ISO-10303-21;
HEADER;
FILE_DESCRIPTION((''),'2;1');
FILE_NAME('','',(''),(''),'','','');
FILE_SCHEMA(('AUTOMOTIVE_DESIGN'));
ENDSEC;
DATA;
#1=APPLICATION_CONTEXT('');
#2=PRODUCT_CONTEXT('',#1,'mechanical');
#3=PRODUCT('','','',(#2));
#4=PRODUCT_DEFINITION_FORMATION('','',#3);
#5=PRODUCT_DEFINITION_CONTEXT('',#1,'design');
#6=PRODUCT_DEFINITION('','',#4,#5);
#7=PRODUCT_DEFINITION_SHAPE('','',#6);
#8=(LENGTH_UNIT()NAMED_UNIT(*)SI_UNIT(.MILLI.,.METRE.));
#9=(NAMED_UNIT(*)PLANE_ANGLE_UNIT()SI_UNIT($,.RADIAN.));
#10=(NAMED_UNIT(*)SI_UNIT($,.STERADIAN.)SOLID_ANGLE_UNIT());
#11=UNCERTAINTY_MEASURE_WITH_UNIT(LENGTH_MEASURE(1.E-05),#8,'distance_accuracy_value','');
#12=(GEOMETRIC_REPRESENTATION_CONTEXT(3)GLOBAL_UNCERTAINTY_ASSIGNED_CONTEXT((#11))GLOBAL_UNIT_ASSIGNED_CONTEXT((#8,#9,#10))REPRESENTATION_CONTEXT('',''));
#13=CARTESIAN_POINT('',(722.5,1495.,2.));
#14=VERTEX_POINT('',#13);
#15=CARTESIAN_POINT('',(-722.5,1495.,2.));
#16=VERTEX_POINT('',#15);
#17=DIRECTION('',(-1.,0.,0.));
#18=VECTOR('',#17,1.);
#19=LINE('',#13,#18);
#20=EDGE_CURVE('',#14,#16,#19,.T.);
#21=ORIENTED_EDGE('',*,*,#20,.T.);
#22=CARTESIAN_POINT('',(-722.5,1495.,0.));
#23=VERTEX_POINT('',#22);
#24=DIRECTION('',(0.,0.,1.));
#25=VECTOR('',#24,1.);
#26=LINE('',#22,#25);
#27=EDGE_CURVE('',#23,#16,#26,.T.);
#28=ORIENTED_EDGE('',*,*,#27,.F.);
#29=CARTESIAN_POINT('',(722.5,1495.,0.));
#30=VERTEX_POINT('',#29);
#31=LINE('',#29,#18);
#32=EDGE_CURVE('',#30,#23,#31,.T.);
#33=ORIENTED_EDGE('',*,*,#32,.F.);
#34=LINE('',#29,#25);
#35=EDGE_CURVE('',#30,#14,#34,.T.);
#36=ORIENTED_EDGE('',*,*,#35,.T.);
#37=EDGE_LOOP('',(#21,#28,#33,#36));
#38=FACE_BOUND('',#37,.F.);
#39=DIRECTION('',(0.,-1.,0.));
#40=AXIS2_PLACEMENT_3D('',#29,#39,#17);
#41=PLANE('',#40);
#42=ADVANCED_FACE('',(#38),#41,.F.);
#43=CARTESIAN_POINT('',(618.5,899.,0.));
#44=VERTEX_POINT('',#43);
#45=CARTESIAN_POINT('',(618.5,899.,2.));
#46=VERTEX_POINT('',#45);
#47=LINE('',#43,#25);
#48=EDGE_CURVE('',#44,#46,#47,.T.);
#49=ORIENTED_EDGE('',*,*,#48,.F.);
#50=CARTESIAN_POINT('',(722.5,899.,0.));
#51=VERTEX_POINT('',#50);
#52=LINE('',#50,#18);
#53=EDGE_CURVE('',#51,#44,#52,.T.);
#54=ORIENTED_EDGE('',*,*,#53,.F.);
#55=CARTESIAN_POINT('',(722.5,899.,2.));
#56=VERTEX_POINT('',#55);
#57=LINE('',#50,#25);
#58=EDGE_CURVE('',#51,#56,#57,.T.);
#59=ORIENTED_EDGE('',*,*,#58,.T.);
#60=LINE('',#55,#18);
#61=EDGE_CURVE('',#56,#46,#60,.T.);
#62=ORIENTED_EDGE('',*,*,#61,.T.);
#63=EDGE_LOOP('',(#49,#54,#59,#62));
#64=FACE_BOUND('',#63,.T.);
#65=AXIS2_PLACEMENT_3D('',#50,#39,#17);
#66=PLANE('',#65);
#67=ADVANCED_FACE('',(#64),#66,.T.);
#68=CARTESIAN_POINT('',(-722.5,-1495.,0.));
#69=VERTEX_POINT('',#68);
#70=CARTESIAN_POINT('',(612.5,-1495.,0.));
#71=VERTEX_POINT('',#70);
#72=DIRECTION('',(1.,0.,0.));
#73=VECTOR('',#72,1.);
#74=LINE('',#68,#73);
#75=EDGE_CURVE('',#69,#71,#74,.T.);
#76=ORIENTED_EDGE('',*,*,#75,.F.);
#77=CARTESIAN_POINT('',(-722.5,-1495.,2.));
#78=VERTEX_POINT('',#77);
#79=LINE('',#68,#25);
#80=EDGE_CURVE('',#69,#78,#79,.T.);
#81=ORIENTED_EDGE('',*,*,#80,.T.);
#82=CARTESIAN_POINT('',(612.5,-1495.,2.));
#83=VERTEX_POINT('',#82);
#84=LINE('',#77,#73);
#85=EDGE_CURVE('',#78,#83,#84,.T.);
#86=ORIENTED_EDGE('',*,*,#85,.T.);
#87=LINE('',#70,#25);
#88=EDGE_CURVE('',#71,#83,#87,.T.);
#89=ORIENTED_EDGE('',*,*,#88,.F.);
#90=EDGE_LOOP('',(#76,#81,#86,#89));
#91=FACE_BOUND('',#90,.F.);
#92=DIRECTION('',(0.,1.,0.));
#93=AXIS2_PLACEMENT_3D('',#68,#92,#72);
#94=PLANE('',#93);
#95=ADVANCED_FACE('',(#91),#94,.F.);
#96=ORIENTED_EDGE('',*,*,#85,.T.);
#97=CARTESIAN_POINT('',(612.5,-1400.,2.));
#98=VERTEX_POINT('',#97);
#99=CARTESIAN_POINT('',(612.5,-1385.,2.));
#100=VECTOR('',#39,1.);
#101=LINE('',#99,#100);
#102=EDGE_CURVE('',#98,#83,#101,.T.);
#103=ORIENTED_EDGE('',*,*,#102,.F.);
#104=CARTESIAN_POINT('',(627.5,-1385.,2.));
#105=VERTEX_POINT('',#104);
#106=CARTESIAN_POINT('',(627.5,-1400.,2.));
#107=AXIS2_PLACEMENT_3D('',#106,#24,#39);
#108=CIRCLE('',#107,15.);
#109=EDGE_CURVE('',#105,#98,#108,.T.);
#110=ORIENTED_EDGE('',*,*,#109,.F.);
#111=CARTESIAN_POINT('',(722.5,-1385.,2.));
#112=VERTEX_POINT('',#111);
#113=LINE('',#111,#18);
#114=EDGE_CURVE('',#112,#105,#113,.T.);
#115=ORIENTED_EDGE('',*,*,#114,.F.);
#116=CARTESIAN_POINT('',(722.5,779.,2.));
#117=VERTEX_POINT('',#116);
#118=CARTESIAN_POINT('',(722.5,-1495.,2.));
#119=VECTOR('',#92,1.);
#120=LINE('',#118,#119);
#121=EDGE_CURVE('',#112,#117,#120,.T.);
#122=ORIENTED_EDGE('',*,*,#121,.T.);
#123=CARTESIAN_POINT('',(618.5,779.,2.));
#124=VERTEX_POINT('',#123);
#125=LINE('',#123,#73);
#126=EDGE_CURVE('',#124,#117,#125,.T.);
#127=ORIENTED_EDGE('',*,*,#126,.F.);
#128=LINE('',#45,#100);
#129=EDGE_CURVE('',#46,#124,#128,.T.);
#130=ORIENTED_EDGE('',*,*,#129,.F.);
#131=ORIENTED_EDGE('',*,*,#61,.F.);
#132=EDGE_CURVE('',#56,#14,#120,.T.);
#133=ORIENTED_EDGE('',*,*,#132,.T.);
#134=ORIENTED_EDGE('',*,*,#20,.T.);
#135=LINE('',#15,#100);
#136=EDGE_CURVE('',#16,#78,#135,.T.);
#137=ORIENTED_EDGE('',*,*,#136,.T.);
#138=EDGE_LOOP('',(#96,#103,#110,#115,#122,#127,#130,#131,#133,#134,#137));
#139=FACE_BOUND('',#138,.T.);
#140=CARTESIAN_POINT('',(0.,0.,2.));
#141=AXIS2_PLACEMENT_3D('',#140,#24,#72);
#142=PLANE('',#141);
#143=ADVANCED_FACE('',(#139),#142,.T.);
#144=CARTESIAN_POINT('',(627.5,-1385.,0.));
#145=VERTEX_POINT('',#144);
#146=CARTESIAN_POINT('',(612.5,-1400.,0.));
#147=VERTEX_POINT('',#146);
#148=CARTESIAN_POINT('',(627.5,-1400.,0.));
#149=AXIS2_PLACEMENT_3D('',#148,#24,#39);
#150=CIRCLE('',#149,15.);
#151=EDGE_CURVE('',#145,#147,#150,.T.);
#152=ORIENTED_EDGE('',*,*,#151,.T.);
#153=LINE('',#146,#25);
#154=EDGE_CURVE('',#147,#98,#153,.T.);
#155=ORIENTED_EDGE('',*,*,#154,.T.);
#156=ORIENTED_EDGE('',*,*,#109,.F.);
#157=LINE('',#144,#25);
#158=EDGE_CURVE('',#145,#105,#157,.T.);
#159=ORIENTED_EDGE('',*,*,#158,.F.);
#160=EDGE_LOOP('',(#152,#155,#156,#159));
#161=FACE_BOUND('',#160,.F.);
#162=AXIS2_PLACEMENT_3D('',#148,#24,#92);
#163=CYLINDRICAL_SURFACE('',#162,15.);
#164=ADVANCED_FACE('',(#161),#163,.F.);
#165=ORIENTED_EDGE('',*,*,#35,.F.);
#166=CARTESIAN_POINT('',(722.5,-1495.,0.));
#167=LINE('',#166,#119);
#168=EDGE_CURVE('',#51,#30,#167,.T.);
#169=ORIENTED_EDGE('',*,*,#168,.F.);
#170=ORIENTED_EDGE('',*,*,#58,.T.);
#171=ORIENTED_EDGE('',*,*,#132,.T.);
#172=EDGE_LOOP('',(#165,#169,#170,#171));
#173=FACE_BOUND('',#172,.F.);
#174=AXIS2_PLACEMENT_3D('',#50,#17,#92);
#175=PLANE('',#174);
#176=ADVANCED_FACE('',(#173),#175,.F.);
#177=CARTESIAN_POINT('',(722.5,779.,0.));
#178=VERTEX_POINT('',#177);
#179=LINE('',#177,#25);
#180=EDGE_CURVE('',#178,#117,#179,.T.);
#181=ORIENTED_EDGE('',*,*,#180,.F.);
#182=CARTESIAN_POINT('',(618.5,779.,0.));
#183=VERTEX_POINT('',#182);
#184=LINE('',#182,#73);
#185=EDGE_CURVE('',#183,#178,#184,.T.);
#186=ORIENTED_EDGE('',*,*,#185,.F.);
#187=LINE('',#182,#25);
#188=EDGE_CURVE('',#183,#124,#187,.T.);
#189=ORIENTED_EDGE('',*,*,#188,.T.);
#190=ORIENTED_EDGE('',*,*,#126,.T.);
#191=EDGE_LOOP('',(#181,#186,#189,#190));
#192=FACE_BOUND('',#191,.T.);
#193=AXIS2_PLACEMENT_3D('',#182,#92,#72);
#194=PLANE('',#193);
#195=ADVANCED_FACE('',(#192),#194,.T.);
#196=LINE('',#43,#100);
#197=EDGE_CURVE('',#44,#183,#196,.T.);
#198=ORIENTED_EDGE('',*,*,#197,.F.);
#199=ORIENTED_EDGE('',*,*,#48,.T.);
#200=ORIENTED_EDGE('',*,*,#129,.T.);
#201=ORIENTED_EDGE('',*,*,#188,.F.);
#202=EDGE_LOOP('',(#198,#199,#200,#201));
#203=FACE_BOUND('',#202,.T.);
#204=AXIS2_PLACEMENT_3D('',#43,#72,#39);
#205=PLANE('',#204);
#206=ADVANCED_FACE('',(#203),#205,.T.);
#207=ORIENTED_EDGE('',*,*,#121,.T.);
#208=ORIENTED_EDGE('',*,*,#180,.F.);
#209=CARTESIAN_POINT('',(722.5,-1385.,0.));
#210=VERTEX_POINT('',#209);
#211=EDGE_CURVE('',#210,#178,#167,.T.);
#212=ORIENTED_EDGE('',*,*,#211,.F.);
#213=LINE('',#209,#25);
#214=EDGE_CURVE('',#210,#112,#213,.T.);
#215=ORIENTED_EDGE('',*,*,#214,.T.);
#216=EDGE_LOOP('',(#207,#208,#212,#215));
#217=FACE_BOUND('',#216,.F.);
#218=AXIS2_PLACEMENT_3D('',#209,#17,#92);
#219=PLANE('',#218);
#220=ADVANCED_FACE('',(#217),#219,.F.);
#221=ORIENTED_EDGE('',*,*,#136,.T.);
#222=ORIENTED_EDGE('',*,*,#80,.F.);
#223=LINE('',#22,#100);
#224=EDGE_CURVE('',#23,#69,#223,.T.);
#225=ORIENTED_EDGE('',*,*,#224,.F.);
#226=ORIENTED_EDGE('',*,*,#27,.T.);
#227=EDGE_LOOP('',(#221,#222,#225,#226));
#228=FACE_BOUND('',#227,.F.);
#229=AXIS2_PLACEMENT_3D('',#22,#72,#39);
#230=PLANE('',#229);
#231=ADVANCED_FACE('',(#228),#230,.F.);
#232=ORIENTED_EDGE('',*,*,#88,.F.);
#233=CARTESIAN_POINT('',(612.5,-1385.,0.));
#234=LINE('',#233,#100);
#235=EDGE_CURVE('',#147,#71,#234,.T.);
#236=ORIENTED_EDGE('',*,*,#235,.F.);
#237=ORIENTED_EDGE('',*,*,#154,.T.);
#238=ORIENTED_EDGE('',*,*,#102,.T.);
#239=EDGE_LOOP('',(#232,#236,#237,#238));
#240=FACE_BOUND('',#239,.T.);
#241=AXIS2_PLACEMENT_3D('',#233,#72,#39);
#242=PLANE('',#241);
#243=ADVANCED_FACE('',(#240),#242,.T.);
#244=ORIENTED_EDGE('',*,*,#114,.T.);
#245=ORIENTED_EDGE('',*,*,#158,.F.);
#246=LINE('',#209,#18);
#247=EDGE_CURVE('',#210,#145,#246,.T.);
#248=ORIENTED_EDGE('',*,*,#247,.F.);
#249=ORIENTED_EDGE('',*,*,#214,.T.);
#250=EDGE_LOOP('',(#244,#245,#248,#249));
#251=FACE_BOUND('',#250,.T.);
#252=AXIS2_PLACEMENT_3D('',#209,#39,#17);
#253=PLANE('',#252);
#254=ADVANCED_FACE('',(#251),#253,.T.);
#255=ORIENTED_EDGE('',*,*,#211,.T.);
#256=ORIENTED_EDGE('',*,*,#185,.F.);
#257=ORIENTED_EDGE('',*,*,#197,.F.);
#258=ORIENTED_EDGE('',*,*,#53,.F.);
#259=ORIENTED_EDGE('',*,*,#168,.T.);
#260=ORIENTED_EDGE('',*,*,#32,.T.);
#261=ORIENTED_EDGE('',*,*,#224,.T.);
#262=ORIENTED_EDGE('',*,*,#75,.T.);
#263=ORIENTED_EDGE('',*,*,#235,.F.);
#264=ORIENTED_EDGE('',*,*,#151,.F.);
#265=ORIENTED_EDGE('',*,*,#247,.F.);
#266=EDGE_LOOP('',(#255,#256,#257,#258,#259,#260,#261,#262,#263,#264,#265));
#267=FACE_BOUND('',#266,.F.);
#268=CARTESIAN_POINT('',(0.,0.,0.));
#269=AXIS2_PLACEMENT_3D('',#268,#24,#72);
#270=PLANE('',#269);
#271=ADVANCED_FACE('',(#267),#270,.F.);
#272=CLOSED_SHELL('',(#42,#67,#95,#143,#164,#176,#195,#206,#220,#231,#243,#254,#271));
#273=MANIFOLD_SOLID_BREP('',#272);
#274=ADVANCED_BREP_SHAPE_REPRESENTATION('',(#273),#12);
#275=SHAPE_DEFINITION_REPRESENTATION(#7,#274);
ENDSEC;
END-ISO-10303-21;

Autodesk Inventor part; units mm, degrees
ref_plane "YZ Plane" through (0, 0, 0) normal (1, 0, 0) x (0, 1, 0)
ref_plane "XZ Plane" through (0, 0, 0) normal (0, 1, 0) x (-1, 0, 0)
ref_plane "XY Plane" through (0, 0, 0) normal (0, 0, 1) x (1, 0, 0)
sketch "Sketch1" plane through (0, 0, 0) normal (0, 0, 1) x (1, 0, 0)
  line L0 (-722.5, -1495) -> (722.5, -1495)
  line L1 (722.5, -1495) -> (722.5, 1495)
  line L2 (722.5, 1495) -> (-722.5, 1495)
  line L3 (-722.5, 1495) -> (-722.5, -1495)
  line L4 (-722.5, -1495) -> (722.5, 1495) construction
  line L5 (722.5, -1495) -> (-722.5, 1495) construction
  line L6 (722.5, -1385) -> (612.5, -1385)
  line L7 (612.5, -1385) -> (612.5, -1495)
  line L8 (722.5, 899) -> (618.5, 899)
  line L9 (618.5, 899) -> (618.5, 779)
  line L10 (618.5, 779) -> (722.5, 779)
  line L11 (722.5, 779) -> (722.5, 899)
  point P0 (0, 0)
  point P1 (722.5, 779)
  dimension "d154" = 1445
  dimension "d155" = 2990
  dimension "d157" = 110
  dimension "d159" = 120
  dimension "d160" = 596
  dimension "d161" = 104
extrude "Plate5" add sketch "Sketch1" along normal blind 2 contours L3 L2 L1 L8 L9 L10 L6 L7 L0
fillet "Corner Round1" radius 15 1 edges at (612.5, -1385, 1)
properties part number "PNS-0111 floor sheet 2" material "Stainless Steel"
